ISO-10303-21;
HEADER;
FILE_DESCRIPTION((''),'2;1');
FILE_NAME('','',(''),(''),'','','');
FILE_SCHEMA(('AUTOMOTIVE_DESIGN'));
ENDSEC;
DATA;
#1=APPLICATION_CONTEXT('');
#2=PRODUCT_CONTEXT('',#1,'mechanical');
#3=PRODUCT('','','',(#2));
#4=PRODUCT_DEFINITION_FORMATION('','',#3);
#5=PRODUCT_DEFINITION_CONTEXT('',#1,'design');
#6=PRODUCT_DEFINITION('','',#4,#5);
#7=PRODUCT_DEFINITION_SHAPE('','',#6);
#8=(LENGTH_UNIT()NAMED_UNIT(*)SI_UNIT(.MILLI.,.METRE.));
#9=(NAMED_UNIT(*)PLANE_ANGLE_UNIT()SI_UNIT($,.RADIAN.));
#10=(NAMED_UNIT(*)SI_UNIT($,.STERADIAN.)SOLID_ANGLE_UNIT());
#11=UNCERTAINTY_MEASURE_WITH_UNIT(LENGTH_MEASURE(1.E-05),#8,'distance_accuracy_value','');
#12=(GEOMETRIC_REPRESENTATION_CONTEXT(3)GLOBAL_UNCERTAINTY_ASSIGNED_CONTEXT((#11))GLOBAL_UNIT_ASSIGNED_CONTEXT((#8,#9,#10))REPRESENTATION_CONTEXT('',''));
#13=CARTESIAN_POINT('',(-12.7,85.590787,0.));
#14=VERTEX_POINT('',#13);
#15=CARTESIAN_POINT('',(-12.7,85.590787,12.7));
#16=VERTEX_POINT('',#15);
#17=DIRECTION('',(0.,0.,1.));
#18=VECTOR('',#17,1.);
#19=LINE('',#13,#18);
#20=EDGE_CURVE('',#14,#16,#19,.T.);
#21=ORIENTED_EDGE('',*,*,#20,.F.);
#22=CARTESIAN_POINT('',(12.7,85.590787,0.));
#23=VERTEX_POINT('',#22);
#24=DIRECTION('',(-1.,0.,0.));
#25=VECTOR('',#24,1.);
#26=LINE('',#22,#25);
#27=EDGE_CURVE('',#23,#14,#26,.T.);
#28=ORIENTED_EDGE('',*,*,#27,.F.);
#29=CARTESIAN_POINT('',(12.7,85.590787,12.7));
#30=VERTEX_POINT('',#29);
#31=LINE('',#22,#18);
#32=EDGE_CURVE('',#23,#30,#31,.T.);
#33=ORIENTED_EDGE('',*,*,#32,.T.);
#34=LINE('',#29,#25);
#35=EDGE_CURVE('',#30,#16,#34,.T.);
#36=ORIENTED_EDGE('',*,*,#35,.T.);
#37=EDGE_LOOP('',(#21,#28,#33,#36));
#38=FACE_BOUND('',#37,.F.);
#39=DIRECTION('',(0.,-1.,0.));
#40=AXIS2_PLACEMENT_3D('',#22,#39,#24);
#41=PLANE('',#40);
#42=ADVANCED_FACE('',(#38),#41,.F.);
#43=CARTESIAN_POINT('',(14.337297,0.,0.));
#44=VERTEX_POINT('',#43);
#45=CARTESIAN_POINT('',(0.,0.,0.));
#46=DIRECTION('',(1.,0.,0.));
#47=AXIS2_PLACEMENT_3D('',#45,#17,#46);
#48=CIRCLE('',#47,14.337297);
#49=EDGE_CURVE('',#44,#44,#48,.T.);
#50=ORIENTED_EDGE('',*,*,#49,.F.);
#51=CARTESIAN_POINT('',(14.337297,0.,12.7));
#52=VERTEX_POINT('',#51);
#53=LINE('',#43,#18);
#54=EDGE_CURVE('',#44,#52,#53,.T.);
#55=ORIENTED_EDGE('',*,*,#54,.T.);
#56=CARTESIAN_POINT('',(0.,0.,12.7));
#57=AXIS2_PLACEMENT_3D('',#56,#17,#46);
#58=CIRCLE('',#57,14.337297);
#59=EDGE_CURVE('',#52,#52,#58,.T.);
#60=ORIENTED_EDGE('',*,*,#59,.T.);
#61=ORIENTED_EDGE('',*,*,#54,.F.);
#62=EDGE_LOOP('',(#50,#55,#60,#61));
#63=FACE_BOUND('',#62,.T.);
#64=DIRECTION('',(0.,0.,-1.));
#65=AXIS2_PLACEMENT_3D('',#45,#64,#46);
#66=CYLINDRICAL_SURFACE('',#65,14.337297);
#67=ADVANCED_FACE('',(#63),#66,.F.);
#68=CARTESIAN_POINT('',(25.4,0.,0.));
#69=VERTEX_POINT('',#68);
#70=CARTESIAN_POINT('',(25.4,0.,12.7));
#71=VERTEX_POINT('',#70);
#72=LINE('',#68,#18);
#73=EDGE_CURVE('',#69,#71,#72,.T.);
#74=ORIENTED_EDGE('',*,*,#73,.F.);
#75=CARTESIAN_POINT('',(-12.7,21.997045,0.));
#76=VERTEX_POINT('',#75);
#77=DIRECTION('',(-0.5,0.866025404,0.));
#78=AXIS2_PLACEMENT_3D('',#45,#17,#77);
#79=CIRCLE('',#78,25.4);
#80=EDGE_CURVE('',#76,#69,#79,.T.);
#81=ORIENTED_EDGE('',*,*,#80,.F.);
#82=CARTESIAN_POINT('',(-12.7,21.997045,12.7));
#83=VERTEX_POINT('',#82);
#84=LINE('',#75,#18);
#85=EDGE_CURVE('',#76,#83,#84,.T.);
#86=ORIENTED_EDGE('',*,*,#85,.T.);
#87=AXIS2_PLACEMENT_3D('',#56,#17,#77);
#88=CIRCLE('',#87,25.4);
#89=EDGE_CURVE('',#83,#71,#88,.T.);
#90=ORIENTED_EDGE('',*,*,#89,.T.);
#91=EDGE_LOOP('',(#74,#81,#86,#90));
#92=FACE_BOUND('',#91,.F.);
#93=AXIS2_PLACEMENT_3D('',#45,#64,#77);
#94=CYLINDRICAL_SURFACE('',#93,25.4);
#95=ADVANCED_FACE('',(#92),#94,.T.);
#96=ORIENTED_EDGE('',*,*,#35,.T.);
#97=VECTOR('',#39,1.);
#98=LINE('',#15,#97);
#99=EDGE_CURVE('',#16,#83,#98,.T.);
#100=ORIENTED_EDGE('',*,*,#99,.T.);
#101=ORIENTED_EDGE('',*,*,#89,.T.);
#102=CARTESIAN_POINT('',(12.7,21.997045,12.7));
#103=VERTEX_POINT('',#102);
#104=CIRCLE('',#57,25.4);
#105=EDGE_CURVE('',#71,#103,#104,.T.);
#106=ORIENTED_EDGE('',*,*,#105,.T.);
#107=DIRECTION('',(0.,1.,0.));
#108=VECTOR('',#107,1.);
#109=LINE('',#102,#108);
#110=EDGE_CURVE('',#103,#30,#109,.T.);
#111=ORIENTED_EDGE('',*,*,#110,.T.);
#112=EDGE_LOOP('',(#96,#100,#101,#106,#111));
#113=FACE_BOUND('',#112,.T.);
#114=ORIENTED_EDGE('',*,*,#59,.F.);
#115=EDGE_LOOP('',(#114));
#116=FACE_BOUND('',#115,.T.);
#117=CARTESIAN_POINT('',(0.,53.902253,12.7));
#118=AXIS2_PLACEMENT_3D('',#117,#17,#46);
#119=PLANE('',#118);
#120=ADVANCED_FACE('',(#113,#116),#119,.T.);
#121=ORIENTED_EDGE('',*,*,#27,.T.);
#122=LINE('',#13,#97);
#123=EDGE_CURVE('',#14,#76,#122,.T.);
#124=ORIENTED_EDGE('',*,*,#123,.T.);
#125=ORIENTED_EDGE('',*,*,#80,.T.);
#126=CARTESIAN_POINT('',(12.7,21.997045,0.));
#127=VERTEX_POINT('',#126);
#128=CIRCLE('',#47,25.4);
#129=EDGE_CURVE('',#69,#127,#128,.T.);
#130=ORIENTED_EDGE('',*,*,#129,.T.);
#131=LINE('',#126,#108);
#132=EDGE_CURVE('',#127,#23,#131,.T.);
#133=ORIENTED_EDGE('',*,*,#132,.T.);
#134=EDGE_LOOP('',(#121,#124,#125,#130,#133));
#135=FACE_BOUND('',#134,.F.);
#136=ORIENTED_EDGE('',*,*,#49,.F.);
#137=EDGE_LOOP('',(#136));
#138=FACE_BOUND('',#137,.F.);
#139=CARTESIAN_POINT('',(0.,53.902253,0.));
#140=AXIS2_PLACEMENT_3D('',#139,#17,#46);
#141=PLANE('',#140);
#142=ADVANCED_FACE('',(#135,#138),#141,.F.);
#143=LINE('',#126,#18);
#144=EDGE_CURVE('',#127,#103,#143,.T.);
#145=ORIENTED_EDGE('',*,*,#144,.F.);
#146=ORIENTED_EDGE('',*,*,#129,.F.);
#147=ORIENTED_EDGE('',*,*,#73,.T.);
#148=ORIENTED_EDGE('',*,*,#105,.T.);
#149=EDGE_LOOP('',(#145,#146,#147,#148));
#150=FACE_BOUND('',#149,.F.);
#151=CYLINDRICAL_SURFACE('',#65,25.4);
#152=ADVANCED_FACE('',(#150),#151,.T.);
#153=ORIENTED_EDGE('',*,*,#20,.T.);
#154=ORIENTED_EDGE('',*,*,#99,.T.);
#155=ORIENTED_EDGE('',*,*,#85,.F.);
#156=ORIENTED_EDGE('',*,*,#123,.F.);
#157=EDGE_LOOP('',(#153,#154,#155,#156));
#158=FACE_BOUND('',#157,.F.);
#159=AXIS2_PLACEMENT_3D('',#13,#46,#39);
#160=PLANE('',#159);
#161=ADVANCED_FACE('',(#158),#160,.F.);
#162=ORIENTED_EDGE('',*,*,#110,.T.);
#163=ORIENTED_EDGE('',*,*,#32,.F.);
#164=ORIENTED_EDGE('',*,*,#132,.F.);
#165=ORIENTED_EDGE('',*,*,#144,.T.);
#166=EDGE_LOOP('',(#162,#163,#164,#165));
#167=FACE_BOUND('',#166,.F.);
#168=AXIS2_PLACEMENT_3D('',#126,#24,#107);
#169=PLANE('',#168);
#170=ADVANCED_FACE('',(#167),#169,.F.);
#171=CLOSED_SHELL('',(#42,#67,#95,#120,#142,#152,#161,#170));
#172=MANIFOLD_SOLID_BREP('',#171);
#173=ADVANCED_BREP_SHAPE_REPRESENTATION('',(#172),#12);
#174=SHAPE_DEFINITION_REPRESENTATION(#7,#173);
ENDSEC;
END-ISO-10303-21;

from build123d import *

# Parameters (mm, degrees)
F0_R     = 14.3372968019
F1_DEPTH = 12.7


# Not quite as in the source:
# - a feature names something its author has since deleted; it is built from what else it names


with BuildPart() as f1:
    # F0 (on Top) → F1 (new body)
    with BuildSketch(Plane.XY):
        with BuildLine():
            ThreePointArc((-12.7, 21.9970452561), (0, 25.4), (12.7, 21.9970452561))
            Line((12.7, 21.9970452561), (12.7, 85.5907872319))
            Line((12.7, 85.5907872319), (0, 85.5907872319))
            Line((0, 85.5907872319), (-12.7, 85.5907872319))
            Line((-12.7, 85.5907872319), (-12.7, 21.9970452561))
        make_face()
        with BuildLine():
            ThreePointArc((-12.7, 21.9970452561), (-12.7, -21.9970452561), (25.4, 0))
            ThreePointArc((25.4, 0), (21.9970452561, 12.7), (12.7, 21.9970452561))
            ThreePointArc((12.7, 21.9970452561), (0, 25.4), (-12.7, 21.9970452561))
        make_face()
        Circle(F0_R, mode=Mode.SUBTRACT)
    extrude(amount=F1_DEPTH)


solid = f1.part
